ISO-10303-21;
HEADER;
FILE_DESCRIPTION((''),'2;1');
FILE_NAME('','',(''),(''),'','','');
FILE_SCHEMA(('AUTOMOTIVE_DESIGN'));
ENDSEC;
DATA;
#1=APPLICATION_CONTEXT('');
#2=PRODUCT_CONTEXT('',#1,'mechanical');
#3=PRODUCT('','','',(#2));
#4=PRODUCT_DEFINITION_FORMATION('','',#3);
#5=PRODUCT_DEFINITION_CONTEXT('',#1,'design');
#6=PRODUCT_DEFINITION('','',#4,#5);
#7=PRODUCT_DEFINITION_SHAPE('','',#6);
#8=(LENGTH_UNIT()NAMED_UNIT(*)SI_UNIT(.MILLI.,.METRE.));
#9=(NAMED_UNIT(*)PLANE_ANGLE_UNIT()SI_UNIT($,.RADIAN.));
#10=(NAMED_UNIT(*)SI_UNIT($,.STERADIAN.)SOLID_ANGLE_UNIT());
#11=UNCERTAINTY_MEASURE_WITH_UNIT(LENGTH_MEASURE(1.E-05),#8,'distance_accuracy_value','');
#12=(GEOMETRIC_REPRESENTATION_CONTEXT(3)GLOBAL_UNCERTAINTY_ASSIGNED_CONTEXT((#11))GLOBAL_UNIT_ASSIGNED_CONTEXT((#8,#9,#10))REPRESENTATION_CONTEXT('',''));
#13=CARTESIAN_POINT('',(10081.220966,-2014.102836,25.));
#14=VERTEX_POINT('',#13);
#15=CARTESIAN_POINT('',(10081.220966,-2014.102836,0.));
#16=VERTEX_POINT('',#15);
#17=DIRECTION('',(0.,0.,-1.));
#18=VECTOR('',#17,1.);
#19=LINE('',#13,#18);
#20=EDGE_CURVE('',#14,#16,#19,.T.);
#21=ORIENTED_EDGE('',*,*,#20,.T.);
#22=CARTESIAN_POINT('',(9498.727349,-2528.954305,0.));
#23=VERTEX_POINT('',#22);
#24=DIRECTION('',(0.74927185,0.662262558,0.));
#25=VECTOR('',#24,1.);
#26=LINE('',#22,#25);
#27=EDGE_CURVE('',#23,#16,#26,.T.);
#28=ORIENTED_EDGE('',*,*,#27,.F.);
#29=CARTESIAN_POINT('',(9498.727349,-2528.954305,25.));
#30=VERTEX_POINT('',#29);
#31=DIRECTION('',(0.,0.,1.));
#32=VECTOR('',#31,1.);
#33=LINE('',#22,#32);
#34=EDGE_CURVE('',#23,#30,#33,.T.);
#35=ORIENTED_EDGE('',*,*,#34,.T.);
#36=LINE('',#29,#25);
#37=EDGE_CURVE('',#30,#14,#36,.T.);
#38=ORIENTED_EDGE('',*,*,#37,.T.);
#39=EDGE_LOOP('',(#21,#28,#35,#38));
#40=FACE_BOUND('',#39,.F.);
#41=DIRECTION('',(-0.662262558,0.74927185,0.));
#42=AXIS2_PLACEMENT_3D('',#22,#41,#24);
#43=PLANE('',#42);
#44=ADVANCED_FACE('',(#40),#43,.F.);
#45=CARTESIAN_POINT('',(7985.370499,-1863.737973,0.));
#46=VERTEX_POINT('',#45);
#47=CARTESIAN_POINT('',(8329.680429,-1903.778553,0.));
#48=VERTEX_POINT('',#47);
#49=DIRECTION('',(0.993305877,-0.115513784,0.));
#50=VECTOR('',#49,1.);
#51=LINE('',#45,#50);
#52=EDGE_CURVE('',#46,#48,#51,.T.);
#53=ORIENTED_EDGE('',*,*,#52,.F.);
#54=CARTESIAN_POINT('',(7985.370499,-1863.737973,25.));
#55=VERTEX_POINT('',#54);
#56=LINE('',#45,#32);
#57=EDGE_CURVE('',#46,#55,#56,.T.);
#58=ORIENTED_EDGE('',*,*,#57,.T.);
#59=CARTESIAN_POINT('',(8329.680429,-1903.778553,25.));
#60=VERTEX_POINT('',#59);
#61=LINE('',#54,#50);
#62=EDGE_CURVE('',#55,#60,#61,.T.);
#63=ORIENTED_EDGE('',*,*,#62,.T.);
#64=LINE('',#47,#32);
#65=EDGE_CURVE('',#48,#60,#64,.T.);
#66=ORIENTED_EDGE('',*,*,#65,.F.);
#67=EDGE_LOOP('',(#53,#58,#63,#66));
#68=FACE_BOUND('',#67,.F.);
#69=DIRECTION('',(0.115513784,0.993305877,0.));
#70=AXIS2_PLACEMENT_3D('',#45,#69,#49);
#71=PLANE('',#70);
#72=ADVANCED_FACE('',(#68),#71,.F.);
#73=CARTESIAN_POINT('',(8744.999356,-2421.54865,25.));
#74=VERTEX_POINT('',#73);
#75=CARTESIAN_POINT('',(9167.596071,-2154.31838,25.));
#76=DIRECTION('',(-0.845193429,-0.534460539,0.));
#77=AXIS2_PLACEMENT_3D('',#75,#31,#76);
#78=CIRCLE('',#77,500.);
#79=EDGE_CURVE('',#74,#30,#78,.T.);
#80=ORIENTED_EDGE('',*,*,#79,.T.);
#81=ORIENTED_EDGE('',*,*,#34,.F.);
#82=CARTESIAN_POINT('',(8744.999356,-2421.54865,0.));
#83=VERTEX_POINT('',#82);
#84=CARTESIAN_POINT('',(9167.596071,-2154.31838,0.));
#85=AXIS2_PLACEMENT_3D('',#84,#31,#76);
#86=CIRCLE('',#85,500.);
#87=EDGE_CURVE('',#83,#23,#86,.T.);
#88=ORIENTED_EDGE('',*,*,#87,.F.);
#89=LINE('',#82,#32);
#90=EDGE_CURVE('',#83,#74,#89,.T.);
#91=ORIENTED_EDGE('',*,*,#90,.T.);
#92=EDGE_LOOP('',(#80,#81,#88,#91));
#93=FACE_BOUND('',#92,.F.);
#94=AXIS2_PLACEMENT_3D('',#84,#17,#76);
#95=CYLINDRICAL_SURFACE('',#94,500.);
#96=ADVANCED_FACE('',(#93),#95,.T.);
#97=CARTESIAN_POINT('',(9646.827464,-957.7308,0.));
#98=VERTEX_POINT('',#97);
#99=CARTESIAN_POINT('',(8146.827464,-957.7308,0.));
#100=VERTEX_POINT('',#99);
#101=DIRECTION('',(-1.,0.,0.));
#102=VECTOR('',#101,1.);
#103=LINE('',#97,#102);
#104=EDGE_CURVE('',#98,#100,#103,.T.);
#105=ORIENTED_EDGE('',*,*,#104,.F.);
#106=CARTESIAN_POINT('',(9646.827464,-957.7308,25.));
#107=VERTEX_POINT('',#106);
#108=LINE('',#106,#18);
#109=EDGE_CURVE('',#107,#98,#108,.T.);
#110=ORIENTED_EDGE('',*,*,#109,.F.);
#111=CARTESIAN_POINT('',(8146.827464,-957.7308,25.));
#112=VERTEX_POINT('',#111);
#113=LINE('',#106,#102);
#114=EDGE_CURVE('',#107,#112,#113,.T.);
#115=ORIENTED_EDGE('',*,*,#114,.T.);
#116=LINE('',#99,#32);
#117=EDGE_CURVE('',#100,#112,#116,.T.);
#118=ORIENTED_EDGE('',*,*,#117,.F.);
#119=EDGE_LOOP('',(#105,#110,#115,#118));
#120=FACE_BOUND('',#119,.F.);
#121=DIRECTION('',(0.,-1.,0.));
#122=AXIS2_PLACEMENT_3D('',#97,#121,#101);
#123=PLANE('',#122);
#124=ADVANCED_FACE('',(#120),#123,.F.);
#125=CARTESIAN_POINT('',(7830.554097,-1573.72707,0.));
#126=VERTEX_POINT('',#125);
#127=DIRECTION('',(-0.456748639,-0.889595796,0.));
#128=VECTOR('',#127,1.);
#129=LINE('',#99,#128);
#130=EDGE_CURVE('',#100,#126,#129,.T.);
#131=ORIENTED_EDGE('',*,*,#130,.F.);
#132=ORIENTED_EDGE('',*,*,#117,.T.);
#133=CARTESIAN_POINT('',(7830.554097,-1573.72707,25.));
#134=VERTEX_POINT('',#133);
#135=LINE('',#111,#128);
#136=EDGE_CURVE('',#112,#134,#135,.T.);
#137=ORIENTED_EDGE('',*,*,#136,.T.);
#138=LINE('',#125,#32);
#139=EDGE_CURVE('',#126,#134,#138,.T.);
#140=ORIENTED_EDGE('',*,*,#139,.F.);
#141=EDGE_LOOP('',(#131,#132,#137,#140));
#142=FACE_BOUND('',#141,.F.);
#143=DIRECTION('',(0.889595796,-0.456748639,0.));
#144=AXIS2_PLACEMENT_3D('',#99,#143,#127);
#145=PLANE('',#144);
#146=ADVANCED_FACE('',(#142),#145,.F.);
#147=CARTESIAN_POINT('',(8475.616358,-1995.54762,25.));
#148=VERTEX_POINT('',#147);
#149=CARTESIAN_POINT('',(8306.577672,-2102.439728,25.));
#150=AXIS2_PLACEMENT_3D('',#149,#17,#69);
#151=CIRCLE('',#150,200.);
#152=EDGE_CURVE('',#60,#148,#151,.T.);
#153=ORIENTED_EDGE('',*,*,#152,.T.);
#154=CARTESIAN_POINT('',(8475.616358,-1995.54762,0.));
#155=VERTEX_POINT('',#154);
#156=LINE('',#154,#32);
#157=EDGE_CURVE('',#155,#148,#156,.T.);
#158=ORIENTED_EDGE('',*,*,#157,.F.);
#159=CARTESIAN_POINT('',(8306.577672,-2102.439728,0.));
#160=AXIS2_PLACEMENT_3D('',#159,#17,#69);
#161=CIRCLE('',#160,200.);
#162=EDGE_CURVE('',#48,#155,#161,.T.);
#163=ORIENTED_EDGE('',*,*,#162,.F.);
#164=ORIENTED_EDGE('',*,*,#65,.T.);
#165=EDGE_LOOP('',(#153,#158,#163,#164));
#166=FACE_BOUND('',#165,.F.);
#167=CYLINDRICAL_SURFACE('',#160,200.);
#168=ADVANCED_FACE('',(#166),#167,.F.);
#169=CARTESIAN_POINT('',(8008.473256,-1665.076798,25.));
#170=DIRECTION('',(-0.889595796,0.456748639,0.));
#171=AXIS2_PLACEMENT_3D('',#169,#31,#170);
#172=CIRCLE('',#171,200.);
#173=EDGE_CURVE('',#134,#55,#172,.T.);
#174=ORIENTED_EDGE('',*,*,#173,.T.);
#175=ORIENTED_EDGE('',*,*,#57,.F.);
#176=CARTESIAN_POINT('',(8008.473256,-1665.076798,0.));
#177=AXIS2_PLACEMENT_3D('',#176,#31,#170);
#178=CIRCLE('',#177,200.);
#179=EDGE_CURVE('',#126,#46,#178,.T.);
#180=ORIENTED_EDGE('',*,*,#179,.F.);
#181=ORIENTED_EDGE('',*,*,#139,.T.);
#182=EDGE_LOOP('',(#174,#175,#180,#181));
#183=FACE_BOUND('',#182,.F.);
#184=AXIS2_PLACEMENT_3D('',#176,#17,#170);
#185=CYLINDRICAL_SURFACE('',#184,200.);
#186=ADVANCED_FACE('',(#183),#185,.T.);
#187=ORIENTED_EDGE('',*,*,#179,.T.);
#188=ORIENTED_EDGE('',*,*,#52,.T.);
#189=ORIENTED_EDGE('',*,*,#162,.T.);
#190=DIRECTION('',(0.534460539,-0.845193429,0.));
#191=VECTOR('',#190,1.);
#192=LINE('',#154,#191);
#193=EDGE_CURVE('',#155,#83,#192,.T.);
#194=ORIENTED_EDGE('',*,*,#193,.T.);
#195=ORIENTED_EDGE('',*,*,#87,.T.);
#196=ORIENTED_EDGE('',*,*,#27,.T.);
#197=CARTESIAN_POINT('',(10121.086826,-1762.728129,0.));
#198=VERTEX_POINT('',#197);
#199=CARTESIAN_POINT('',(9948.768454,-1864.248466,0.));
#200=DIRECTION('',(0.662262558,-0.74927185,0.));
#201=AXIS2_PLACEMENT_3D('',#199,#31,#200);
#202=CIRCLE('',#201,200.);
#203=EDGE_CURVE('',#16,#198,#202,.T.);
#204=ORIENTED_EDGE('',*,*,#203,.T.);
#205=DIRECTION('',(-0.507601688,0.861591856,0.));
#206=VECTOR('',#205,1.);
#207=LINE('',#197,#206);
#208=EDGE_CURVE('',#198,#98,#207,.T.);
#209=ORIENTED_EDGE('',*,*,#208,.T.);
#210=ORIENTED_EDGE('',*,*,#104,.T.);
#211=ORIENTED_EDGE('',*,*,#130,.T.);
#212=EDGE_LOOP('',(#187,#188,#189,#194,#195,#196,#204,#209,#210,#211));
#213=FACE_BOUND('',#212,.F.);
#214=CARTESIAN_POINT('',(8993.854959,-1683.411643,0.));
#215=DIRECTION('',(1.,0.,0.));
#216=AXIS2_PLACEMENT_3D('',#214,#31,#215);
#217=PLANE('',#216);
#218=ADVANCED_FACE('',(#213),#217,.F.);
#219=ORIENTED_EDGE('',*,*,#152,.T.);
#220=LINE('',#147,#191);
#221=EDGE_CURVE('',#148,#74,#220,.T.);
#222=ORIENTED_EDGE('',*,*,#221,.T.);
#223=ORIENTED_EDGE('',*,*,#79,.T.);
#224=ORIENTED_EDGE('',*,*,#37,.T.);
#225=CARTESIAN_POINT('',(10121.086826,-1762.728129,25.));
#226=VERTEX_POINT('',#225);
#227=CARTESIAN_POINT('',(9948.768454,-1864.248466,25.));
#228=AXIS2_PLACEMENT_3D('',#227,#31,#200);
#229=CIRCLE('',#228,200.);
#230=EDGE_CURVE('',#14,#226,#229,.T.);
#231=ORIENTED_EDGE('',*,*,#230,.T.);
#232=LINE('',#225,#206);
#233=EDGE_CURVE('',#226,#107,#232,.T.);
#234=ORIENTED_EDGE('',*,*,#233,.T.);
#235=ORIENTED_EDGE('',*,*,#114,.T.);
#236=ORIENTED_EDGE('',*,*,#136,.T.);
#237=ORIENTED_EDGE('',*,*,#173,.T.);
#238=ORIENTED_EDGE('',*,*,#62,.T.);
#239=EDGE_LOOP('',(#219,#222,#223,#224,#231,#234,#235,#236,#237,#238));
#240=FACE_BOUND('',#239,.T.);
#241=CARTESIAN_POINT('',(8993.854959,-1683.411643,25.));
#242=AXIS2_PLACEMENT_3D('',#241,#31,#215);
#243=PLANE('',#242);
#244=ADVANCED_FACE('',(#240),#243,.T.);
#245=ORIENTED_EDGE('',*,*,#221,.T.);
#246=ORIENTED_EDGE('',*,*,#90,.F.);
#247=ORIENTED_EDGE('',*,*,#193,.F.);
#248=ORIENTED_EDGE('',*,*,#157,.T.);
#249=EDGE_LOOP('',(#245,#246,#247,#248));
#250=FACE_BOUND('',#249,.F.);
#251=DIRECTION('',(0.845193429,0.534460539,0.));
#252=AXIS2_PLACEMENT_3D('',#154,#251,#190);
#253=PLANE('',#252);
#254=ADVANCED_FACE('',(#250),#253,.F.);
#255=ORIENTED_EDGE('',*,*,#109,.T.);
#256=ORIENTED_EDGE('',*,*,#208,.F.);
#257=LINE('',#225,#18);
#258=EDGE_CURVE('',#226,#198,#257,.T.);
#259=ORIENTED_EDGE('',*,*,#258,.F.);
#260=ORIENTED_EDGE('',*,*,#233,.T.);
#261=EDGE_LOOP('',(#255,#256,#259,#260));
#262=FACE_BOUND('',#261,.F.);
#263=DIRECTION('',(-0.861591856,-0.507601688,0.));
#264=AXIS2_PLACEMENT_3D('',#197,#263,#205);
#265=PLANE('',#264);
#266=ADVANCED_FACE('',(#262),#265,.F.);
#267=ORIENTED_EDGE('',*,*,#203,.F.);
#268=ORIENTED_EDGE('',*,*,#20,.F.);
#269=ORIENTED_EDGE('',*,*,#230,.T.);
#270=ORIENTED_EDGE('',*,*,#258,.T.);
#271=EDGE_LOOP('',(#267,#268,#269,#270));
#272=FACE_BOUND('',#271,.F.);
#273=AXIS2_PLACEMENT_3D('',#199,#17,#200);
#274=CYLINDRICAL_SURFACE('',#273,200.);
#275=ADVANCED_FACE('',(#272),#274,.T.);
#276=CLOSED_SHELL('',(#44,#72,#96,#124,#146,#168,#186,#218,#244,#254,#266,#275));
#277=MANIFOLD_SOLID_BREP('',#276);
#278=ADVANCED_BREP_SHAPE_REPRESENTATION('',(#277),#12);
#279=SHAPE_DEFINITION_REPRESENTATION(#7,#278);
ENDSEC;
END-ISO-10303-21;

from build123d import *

# Parameters (mm, degrees)
F1_DEPTH = 1
F2_DEPTH = 25


# Not quite as in the source:
# - a feature names something its author has since deleted; it is built from what else it names


with BuildPart() as f1:
    # F0 (on Top) → F1 (new body)
    with BuildSketch(Plane.XY):
        with BuildLine():
            Line((9646.8274642131, -957.7307995355), (8146.8274642131, -957.7307995355))
            Line((8146.8274642131, -957.7307995355), (7830.554096613, -1573.7270701518))
            ThreePointArc((7830.554096613, -1573.7270701518), (7832.0390367178, -1759.2626053639), (7985.3704990637, -1863.7379734104))
            Line((7985.3704990637, -1863.7379734104), (8329.6804291381, -1903.7785528549))
            ThreePointArc((8329.6804291381, -1903.7785528549), (8413.0435068902, -1933.1322385833), (8475.616358081, -1995.5476204376))
            Line((8475.616358081, -1995.5476204376), (8744.9993562468, -2421.5486497246))
            ThreePointArc((8744.9993562468, -2421.5486497246), (9097.0590224145, -2649.3179001076), (9498.727349417, -2528.9543049258))
            Line((9498.727349417, -2528.9543049258), (10081.2209659321, -2014.102836222))
            ThreePointArc((10081.2209659321, -2014.102836222), (10146.2998029037, -1895.5752337571), (10121.0868255742, -1762.7281286256))
            Line((10121.0868255742, -1762.7281286256), (9646.8274642131, -957.7307995355))
        make_face()
    extrude(amount=F1_DEPTH)

    # F0 (on Top) → F2 (join)
    with BuildSketch(Plane.XY):
        with BuildLine():
            Line((9646.8274642131, -957.7307995355), (8146.8274642131, -957.7307995355))
            Line((8146.8274642131, -957.7307995355), (7830.554096613, -1573.7270701518))
            ThreePointArc((7830.554096613, -1573.7270701518), (7832.0390367178, -1759.2626053639), (7985.3704990637, -1863.7379734104))
            Line((7985.3704990637, -1863.7379734104), (8329.6804291381, -1903.7785528549))
            ThreePointArc((8329.6804291381, -1903.7785528549), (8413.0435068902, -1933.1322385833), (8475.616358081, -1995.5476204376))
            Line((8475.616358081, -1995.5476204376), (8744.9993562468, -2421.5486497246))
            ThreePointArc((8744.9993562468, -2421.5486497246), (9097.0590224145, -2649.3179001076), (9498.727349417, -2528.9543049258))
            Line((9498.727349417, -2528.9543049258), (10081.2209659321, -2014.102836222))
            ThreePointArc((10081.2209659321, -2014.102836222), (10146.2998029037, -1895.5752337571), (10121.0868255742, -1762.7281286256))
            Line((10121.0868255742, -1762.7281286256), (9646.8274642131, -957.7307995355))
        make_face()
    extrude(amount=F2_DEPTH)


solid = f1.part
